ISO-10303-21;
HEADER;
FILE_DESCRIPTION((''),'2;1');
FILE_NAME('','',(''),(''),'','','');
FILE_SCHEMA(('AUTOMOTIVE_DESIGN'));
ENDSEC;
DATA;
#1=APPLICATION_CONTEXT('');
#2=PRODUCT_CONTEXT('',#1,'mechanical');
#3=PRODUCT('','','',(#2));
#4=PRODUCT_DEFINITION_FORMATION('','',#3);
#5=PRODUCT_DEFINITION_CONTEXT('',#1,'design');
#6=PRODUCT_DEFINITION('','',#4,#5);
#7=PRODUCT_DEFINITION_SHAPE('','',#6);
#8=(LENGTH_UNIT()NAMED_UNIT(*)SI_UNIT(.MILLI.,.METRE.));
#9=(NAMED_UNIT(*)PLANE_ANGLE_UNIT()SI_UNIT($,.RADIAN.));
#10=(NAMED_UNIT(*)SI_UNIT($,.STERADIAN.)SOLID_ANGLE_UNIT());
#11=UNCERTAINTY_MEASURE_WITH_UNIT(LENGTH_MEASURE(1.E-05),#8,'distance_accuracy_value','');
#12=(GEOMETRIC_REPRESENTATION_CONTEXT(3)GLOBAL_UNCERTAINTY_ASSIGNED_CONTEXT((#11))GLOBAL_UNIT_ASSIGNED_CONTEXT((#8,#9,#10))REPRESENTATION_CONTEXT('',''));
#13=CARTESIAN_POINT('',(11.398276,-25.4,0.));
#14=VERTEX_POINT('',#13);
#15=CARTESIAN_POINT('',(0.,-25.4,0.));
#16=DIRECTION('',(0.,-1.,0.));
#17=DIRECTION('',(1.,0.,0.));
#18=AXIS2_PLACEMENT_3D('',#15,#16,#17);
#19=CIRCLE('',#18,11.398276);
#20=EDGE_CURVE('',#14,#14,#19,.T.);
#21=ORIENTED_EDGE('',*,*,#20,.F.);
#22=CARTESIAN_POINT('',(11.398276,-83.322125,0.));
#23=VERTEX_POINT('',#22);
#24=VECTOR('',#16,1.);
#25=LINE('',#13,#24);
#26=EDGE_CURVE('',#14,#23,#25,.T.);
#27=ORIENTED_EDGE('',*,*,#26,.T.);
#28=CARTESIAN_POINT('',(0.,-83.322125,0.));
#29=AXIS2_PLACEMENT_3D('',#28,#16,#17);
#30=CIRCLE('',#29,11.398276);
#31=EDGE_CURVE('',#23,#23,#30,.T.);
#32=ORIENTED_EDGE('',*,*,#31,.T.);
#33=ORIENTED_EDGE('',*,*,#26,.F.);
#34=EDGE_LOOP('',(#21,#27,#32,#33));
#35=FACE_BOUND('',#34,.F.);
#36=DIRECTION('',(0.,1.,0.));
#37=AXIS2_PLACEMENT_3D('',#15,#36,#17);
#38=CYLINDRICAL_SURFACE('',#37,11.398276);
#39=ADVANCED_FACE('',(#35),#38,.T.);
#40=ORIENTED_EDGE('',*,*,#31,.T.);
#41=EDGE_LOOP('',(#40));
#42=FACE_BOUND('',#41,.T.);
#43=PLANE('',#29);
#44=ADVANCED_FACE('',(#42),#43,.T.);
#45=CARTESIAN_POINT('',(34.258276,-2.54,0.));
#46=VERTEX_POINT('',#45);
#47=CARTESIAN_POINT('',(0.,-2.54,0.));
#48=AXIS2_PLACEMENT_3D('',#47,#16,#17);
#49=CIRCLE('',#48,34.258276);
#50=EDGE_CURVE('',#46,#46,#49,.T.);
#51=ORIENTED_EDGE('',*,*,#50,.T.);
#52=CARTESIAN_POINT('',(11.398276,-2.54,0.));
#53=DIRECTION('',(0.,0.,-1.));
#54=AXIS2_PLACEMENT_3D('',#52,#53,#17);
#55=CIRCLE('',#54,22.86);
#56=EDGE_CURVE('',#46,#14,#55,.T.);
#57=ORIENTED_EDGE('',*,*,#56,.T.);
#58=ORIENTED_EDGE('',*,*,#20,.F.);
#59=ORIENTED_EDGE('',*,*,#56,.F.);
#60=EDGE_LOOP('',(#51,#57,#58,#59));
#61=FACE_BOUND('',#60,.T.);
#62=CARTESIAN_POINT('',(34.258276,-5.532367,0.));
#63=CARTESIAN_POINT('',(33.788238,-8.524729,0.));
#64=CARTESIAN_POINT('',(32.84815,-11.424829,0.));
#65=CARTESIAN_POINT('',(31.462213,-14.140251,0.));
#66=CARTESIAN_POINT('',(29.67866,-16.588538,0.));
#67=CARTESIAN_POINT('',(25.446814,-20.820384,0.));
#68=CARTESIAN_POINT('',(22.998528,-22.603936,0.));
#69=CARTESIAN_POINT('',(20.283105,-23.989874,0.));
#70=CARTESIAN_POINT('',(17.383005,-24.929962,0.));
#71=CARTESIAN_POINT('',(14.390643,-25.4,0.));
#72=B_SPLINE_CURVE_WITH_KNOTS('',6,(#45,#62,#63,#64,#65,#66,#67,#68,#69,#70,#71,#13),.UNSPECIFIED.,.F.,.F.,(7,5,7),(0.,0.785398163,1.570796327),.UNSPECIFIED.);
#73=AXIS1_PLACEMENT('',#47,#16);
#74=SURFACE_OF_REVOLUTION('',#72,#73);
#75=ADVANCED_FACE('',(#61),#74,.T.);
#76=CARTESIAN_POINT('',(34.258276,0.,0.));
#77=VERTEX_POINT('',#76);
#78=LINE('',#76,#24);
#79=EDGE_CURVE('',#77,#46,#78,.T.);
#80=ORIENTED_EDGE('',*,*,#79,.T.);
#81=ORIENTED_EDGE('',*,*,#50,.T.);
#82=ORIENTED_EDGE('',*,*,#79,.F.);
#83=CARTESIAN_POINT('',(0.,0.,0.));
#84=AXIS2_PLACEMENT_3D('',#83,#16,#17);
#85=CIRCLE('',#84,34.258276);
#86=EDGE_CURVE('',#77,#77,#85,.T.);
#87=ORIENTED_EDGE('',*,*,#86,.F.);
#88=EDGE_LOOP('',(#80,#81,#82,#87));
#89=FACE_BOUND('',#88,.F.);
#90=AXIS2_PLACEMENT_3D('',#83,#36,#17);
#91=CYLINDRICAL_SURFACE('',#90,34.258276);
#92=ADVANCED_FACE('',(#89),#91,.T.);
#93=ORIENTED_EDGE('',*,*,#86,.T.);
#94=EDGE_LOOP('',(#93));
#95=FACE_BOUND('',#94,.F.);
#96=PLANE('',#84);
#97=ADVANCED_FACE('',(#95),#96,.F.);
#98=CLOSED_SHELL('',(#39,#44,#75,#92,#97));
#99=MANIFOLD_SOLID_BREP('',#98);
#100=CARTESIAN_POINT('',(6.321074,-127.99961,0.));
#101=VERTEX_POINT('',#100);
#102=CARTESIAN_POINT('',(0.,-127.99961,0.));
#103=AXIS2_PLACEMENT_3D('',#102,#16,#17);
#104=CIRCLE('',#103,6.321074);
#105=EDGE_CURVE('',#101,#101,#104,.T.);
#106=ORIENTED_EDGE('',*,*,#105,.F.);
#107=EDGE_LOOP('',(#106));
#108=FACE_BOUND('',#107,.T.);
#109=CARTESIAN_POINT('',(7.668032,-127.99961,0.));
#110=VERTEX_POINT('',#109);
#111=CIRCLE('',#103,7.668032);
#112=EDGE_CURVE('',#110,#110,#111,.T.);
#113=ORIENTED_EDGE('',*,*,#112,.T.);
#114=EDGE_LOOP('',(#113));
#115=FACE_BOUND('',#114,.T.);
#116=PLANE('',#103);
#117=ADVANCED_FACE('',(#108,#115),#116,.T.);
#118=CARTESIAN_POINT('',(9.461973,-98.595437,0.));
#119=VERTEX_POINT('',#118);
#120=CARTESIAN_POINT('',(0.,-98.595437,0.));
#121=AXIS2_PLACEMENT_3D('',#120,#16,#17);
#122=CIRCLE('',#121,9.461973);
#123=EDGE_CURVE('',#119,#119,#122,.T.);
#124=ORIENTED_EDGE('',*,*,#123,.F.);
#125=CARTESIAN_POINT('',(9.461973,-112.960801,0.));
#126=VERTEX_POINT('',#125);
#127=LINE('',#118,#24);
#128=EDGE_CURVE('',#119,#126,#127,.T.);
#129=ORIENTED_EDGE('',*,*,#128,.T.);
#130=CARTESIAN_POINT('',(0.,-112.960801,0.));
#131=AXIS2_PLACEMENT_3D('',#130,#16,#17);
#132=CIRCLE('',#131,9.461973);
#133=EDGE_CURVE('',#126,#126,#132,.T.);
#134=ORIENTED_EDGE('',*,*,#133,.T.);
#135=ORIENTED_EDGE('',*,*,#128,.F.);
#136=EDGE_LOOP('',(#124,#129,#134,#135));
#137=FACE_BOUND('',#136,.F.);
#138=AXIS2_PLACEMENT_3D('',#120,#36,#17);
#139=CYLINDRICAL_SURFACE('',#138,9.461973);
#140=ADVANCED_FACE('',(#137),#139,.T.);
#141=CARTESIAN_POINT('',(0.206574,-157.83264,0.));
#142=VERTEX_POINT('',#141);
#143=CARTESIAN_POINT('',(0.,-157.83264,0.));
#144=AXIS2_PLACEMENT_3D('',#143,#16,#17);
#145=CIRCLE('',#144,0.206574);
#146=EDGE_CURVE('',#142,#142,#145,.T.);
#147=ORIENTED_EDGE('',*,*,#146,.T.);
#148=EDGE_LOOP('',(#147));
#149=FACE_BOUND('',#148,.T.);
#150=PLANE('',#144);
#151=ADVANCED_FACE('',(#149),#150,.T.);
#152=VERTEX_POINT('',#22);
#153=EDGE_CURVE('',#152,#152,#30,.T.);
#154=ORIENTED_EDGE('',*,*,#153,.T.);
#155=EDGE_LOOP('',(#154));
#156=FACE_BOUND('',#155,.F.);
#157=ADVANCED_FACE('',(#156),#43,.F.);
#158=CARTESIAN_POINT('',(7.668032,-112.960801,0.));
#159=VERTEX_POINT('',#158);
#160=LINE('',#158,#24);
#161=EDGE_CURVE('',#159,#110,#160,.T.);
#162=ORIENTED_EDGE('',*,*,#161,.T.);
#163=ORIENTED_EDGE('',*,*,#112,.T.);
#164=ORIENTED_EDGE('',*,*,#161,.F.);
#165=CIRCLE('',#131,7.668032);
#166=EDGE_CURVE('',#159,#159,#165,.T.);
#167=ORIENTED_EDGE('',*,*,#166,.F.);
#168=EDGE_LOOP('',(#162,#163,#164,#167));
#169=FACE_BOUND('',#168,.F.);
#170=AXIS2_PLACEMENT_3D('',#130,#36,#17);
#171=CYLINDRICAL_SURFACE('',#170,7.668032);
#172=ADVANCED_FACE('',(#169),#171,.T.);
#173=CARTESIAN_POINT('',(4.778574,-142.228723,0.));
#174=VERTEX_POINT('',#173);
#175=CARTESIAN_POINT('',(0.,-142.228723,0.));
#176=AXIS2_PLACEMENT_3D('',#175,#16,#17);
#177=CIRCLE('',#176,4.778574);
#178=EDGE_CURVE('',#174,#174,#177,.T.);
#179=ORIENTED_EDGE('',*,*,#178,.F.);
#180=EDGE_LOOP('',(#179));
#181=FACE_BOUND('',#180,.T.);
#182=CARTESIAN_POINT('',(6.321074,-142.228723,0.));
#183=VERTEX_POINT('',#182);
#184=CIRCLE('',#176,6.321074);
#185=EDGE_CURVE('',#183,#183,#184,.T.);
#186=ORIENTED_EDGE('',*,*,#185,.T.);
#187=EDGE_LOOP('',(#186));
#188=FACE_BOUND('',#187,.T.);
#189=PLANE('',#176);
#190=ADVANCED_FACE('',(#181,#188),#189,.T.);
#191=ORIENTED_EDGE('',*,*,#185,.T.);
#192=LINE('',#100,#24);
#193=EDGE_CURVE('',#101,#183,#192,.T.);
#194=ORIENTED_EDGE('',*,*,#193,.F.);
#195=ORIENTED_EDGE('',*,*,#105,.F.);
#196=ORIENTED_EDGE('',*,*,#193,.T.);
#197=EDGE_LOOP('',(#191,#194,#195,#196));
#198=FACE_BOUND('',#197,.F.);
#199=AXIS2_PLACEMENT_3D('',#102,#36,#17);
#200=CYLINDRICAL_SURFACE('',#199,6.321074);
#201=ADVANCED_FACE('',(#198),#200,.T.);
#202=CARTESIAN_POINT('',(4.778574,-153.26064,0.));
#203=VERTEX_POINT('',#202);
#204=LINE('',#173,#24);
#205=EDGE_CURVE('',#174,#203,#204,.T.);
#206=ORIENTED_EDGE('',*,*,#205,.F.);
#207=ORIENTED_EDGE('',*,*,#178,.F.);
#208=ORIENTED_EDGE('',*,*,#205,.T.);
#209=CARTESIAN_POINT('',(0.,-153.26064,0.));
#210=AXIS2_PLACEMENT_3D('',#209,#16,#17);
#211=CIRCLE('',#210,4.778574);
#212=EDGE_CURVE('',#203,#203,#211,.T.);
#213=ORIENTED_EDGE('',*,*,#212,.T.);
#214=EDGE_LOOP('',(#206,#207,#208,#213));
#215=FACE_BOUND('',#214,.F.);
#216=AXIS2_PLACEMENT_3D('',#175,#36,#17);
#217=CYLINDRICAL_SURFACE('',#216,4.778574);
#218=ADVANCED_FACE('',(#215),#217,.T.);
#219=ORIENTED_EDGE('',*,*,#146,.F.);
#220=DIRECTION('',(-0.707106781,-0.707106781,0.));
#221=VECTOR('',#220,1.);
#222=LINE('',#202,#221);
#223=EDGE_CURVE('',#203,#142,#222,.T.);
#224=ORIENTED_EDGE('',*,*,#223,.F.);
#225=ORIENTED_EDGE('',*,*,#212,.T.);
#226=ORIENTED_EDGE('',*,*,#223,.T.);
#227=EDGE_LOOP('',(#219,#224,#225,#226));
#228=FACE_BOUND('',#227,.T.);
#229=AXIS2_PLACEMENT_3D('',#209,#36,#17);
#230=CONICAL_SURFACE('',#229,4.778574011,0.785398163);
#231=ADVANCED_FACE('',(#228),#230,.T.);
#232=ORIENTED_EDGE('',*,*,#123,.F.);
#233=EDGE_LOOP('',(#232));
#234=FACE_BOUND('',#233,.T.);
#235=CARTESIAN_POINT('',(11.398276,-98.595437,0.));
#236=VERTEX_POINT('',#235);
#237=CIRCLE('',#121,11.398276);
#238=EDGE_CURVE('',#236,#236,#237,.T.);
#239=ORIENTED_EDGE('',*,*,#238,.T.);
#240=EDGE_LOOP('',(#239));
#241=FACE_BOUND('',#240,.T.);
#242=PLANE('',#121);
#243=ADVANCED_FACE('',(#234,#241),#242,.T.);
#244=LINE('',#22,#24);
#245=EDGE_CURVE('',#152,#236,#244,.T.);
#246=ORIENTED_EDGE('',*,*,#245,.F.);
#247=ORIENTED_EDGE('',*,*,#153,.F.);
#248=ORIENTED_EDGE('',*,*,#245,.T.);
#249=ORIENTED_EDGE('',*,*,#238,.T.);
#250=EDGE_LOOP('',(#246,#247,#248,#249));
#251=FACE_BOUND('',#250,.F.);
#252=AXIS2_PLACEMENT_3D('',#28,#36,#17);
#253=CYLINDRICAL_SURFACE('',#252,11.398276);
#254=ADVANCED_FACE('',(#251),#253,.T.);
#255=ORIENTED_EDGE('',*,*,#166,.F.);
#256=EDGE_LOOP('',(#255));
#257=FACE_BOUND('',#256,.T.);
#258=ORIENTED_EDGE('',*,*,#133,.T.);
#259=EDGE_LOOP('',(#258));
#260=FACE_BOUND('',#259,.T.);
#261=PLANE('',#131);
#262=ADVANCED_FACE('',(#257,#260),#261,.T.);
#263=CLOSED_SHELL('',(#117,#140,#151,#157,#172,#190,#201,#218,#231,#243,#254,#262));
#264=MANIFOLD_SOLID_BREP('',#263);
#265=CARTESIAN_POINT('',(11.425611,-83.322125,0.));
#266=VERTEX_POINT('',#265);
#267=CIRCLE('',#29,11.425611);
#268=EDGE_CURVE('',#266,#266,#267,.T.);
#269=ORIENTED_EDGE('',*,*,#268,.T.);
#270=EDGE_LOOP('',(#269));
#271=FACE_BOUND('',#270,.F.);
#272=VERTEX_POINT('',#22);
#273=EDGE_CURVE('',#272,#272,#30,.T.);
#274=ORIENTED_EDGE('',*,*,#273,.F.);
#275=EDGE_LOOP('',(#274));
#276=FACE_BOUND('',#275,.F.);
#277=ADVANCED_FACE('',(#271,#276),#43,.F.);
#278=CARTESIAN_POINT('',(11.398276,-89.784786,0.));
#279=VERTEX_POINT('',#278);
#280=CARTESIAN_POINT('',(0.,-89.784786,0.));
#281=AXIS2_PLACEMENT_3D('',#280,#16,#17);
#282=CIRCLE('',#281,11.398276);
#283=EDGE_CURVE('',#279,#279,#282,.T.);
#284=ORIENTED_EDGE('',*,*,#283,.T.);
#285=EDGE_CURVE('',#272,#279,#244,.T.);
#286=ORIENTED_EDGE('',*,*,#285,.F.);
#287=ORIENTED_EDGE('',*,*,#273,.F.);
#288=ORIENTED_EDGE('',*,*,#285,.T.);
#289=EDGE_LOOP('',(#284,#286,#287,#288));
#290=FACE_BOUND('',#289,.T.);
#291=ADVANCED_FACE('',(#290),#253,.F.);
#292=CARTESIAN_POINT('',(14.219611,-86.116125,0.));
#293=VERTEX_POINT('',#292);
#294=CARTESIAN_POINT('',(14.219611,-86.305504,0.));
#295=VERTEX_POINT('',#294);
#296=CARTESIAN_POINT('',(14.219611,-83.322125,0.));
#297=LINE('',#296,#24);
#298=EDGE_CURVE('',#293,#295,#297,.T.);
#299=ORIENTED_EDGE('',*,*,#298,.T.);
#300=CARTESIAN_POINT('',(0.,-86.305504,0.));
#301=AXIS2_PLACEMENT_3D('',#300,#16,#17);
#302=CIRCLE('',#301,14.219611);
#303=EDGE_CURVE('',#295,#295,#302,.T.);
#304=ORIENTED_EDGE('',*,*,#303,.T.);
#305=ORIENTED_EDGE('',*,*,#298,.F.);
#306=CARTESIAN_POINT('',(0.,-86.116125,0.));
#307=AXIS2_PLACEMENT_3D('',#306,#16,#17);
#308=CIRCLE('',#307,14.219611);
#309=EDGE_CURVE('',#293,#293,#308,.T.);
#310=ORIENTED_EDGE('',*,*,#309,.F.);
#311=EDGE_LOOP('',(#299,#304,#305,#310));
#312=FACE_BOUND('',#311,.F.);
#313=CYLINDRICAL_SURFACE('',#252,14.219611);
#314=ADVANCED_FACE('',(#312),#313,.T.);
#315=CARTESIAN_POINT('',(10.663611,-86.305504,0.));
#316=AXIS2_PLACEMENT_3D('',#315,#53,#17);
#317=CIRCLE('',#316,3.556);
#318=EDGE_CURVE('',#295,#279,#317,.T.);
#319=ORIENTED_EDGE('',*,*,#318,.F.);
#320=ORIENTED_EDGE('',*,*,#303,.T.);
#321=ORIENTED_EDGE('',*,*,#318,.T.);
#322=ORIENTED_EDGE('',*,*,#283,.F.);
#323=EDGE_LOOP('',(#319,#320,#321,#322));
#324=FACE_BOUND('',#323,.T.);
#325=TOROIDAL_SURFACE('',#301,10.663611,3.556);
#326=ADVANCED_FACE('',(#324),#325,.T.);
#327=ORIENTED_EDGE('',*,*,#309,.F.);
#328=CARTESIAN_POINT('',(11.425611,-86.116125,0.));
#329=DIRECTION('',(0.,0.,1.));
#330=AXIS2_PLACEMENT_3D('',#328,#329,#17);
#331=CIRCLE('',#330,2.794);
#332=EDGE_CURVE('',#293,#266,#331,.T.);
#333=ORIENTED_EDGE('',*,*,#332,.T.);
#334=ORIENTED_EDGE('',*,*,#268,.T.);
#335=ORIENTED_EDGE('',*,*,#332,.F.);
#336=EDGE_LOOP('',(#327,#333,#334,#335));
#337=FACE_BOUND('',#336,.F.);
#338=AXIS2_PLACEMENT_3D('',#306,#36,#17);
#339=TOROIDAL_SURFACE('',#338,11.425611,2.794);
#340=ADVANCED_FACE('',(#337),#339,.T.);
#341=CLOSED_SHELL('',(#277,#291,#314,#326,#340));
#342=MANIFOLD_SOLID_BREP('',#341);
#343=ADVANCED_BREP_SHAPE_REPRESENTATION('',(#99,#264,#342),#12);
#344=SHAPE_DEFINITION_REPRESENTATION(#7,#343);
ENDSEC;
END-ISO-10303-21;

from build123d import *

# Parameters (mm, degrees)
F0_R      = 34.2582763281
F1_DEPTH  = 25.4
F2_R      = 22.86
F3_DEPTH  = 57.9221248627
F4_R      = 14.2196111498
F4_R_2    = 11.3982763281
F5_DEPTH  = 6.4626615494
F7_R      = 2.794
F8_DEPTH  = 15.2733121067
F9_R      = 9.4619725581
F10_DEPTH = 14.3653638661
F11_R     = 7.6680324081
F12_DEPTH = 15.0388088077
F13_R     = 6.3210744691
F14_DEPTH = 14.2291132361
F15_R     = 4.7785740108
F16_DEPTH = 15.6039167196
F17_SIZE  = 4.572


# Not quite as in the source:
# - a fillet or chamfer that OpenCascade refuses, or shapes differently, is made with other operations: its cross-section is extruded or revolved along the edge and cut away or added


with BuildPart() as f1:
    # F0 (on Front) → F1 (new body)
    with BuildSketch(Plane.XZ):
        Circle(F0_R)
    extrude(amount=F1_DEPTH)

    # F2
    f2_edges = [f1.edges().sort_by_distance(p)[0] for p in [
        (-34.258276, -25.4, 0),
    ]]
    fillet(f2_edges, radius=F2_R)

    # F3 (add): a face of the model
    f3_faces = [f1.faces().sort_by_distance(p)[0] for p in [
        (0, -25.4, 0),
    ]]
    extrude(f3_faces, amount=F3_DEPTH)


with BuildPart() as f5:
    # F4 (on face) → F5 (new body)
    with BuildSketch(Plane.XZ.offset(83.3221248627)):
        Circle(F4_R)
        Circle(F4_R_2, mode=Mode.SUBTRACT)
    extrude(amount=F5_DEPTH)

    # F6: fillet of radius 3.556 on 1 edges, made by hand

    # F6_s1 → F6_t2 (revolve, cut)
    with BuildSketch(Plane.XY):
        with BuildLine():
            ThreePointArc((14.2196111498, -86.3055044351), (13.4256398765, -88.5452216746), (11.3982763281, -89.7847864121))
            Line((11.3982763281, -89.7847864121), (14.2196111498, -89.7847864121))
            Line((14.2196111498, -89.7847864121), (14.2196111498, -86.3055044351))
        make_face()
    revolve(axis=Axis((0, -89.7847864121, 0), (0, -1, 0)), mode=Mode.SUBTRACT)

    # F7
    f7_edges = [f5.edges().sort_by_distance(p)[0] for p in [
        (-14.219611, -83.322125, 0),
    ]]
    fillet(f7_edges, radius=F7_R)


with BuildPart() as f8:
    # F8 (new): a face of the model
    f8_faces = [f1.part.faces().sort_by_distance(p)[0] for p in [
        (0, -83.3221248627, 0),
    ]]
    extrude(f8_faces, amount=F8_DEPTH)

    # F9 (on face) → F10 (join)
    with BuildSketch(Plane.XZ.offset(98.5954369694)):
        Circle(F9_R)
    extrude(amount=F10_DEPTH)

    # F11 (on face) → F12 (join)
    with BuildSketch(Plane.XZ.offset(112.9608008355)):
        Circle(F11_R)
    extrude(amount=F12_DEPTH)

    # F13 (on face) → F14 (join)
    with BuildSketch(Plane.XZ.offset(127.9996096432)):
        Circle(F13_R)
    extrude(amount=F14_DEPTH)

    # F15 (on face) → F16 (join)
    with BuildSketch(Plane.XZ.offset(142.2287228793)):
        Circle(F15_R)
    extrude(amount=F16_DEPTH)

    # F17
    f17_edges = [f8.edges().sort_by_distance(p)[0] for p in [
        (-4.778574, -157.83264, 0),
    ]]
    chamfer(f17_edges, length=F17_SIZE)


solid = Compound([f1.part, f5.part, f8.part])
